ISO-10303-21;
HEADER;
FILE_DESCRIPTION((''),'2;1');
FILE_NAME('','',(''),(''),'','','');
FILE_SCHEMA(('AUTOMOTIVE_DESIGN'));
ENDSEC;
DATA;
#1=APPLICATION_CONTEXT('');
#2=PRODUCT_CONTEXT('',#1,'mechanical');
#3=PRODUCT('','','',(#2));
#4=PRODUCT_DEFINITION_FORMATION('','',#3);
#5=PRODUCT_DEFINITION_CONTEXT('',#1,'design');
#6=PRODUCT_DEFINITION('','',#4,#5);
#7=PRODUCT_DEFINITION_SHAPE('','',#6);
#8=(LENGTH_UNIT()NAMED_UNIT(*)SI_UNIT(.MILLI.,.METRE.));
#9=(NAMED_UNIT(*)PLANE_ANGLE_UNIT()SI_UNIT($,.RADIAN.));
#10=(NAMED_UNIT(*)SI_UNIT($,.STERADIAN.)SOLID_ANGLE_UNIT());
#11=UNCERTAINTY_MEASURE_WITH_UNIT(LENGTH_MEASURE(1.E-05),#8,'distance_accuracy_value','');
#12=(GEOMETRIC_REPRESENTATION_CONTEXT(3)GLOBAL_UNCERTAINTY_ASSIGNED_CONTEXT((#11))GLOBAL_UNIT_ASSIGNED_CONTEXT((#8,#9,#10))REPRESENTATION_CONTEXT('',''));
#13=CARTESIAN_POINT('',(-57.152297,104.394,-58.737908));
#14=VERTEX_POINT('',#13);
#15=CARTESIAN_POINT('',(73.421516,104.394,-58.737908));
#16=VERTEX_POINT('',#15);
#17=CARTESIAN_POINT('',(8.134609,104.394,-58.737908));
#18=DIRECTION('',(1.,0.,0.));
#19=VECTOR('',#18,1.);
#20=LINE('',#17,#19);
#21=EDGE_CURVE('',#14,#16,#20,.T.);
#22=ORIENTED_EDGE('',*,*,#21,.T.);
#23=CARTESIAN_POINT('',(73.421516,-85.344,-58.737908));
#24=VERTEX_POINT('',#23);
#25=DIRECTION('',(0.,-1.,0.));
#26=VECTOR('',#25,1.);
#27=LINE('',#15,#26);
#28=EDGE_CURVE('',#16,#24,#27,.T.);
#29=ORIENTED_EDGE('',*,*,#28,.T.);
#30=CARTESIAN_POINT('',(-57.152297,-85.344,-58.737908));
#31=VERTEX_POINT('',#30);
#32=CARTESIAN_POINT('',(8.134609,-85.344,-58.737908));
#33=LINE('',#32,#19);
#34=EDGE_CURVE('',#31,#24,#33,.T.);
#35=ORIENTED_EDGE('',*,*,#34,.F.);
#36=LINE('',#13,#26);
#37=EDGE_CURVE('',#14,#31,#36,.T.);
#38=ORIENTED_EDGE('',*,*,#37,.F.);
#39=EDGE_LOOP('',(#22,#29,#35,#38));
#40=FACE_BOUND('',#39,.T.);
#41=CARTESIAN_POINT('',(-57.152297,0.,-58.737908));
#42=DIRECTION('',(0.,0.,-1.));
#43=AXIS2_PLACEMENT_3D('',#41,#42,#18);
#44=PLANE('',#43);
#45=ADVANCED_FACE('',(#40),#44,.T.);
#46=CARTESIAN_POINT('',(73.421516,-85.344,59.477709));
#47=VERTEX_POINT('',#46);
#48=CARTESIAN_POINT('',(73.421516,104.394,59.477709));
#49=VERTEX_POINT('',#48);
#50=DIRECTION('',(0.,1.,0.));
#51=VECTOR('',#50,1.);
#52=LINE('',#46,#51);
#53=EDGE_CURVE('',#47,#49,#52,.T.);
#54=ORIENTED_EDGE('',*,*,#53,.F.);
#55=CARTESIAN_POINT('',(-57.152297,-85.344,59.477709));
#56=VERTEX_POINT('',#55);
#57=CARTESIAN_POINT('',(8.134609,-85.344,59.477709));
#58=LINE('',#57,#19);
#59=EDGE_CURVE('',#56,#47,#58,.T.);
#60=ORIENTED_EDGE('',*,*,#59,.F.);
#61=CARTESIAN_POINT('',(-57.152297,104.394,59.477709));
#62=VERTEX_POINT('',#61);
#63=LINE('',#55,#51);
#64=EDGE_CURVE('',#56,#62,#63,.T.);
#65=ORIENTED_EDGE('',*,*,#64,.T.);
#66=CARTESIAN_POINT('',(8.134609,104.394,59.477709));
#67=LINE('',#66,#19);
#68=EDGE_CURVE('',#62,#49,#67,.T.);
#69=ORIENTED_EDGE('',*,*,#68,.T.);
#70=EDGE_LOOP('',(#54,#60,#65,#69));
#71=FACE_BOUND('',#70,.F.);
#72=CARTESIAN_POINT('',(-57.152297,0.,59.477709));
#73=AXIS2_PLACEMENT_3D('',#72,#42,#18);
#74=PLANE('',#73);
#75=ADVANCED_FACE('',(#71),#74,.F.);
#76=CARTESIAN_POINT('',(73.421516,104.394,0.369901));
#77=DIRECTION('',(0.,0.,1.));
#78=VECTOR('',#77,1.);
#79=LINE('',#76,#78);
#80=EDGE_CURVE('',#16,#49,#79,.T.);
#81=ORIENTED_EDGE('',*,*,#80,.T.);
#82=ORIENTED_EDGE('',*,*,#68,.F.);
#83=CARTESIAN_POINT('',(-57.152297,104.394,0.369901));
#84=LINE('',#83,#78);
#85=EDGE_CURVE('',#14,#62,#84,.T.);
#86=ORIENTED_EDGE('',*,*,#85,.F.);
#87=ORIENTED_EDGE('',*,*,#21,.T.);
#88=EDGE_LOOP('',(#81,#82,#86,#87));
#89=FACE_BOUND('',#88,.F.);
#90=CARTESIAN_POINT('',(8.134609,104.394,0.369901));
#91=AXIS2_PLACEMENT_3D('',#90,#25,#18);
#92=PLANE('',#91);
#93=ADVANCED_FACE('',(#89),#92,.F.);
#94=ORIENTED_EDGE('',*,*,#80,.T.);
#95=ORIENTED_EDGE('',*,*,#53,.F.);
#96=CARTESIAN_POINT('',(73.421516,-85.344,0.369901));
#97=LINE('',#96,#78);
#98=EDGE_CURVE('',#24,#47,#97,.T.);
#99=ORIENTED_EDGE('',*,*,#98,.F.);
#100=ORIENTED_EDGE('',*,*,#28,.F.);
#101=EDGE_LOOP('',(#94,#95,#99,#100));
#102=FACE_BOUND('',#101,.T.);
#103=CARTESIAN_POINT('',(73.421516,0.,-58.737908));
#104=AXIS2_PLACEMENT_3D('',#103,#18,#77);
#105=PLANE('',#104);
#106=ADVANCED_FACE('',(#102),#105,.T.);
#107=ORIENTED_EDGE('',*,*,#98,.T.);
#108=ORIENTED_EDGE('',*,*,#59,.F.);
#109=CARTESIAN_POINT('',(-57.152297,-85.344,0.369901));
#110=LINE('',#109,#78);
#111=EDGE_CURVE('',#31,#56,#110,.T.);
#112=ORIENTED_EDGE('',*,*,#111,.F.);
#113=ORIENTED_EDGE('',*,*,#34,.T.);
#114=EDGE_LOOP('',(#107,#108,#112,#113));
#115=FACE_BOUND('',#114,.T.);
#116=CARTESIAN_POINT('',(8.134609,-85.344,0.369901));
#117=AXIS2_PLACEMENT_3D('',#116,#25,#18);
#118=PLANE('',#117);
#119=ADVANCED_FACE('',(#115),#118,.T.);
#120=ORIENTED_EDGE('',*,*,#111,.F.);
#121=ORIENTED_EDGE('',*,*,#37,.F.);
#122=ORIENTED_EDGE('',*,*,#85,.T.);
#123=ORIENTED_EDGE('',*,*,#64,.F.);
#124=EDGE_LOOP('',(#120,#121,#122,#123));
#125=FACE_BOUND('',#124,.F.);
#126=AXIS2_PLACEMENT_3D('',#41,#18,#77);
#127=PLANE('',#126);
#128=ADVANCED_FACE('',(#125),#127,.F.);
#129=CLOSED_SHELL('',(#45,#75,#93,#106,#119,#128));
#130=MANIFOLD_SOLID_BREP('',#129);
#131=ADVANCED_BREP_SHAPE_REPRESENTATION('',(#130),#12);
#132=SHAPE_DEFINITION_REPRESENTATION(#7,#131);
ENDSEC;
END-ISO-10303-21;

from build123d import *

# Parameters (mm, degrees)
F0_W          = 130.5738128722
F0_H          = 118.2156167924
F1_DEPTH      = 85.344
F1_DEPTH_BACK = 104.394


# Not quite as in the source:
# - a feature of the source that left no trace in its solid (it failed there, or was rolled back) is left out


with BuildPart() as f1:
    # F0 (on Front) → F1 (new body, two sides)
    with BuildSketch(Plane.XZ) as f1_sk:
        with Locations((8.1346090883, 0.3699008375)):
            Rectangle(F0_W, F0_H)
    extrude(amount=F1_DEPTH)
    extrude(f1_sk.sketch, amount=-F1_DEPTH_BACK)


solid = f1.part
